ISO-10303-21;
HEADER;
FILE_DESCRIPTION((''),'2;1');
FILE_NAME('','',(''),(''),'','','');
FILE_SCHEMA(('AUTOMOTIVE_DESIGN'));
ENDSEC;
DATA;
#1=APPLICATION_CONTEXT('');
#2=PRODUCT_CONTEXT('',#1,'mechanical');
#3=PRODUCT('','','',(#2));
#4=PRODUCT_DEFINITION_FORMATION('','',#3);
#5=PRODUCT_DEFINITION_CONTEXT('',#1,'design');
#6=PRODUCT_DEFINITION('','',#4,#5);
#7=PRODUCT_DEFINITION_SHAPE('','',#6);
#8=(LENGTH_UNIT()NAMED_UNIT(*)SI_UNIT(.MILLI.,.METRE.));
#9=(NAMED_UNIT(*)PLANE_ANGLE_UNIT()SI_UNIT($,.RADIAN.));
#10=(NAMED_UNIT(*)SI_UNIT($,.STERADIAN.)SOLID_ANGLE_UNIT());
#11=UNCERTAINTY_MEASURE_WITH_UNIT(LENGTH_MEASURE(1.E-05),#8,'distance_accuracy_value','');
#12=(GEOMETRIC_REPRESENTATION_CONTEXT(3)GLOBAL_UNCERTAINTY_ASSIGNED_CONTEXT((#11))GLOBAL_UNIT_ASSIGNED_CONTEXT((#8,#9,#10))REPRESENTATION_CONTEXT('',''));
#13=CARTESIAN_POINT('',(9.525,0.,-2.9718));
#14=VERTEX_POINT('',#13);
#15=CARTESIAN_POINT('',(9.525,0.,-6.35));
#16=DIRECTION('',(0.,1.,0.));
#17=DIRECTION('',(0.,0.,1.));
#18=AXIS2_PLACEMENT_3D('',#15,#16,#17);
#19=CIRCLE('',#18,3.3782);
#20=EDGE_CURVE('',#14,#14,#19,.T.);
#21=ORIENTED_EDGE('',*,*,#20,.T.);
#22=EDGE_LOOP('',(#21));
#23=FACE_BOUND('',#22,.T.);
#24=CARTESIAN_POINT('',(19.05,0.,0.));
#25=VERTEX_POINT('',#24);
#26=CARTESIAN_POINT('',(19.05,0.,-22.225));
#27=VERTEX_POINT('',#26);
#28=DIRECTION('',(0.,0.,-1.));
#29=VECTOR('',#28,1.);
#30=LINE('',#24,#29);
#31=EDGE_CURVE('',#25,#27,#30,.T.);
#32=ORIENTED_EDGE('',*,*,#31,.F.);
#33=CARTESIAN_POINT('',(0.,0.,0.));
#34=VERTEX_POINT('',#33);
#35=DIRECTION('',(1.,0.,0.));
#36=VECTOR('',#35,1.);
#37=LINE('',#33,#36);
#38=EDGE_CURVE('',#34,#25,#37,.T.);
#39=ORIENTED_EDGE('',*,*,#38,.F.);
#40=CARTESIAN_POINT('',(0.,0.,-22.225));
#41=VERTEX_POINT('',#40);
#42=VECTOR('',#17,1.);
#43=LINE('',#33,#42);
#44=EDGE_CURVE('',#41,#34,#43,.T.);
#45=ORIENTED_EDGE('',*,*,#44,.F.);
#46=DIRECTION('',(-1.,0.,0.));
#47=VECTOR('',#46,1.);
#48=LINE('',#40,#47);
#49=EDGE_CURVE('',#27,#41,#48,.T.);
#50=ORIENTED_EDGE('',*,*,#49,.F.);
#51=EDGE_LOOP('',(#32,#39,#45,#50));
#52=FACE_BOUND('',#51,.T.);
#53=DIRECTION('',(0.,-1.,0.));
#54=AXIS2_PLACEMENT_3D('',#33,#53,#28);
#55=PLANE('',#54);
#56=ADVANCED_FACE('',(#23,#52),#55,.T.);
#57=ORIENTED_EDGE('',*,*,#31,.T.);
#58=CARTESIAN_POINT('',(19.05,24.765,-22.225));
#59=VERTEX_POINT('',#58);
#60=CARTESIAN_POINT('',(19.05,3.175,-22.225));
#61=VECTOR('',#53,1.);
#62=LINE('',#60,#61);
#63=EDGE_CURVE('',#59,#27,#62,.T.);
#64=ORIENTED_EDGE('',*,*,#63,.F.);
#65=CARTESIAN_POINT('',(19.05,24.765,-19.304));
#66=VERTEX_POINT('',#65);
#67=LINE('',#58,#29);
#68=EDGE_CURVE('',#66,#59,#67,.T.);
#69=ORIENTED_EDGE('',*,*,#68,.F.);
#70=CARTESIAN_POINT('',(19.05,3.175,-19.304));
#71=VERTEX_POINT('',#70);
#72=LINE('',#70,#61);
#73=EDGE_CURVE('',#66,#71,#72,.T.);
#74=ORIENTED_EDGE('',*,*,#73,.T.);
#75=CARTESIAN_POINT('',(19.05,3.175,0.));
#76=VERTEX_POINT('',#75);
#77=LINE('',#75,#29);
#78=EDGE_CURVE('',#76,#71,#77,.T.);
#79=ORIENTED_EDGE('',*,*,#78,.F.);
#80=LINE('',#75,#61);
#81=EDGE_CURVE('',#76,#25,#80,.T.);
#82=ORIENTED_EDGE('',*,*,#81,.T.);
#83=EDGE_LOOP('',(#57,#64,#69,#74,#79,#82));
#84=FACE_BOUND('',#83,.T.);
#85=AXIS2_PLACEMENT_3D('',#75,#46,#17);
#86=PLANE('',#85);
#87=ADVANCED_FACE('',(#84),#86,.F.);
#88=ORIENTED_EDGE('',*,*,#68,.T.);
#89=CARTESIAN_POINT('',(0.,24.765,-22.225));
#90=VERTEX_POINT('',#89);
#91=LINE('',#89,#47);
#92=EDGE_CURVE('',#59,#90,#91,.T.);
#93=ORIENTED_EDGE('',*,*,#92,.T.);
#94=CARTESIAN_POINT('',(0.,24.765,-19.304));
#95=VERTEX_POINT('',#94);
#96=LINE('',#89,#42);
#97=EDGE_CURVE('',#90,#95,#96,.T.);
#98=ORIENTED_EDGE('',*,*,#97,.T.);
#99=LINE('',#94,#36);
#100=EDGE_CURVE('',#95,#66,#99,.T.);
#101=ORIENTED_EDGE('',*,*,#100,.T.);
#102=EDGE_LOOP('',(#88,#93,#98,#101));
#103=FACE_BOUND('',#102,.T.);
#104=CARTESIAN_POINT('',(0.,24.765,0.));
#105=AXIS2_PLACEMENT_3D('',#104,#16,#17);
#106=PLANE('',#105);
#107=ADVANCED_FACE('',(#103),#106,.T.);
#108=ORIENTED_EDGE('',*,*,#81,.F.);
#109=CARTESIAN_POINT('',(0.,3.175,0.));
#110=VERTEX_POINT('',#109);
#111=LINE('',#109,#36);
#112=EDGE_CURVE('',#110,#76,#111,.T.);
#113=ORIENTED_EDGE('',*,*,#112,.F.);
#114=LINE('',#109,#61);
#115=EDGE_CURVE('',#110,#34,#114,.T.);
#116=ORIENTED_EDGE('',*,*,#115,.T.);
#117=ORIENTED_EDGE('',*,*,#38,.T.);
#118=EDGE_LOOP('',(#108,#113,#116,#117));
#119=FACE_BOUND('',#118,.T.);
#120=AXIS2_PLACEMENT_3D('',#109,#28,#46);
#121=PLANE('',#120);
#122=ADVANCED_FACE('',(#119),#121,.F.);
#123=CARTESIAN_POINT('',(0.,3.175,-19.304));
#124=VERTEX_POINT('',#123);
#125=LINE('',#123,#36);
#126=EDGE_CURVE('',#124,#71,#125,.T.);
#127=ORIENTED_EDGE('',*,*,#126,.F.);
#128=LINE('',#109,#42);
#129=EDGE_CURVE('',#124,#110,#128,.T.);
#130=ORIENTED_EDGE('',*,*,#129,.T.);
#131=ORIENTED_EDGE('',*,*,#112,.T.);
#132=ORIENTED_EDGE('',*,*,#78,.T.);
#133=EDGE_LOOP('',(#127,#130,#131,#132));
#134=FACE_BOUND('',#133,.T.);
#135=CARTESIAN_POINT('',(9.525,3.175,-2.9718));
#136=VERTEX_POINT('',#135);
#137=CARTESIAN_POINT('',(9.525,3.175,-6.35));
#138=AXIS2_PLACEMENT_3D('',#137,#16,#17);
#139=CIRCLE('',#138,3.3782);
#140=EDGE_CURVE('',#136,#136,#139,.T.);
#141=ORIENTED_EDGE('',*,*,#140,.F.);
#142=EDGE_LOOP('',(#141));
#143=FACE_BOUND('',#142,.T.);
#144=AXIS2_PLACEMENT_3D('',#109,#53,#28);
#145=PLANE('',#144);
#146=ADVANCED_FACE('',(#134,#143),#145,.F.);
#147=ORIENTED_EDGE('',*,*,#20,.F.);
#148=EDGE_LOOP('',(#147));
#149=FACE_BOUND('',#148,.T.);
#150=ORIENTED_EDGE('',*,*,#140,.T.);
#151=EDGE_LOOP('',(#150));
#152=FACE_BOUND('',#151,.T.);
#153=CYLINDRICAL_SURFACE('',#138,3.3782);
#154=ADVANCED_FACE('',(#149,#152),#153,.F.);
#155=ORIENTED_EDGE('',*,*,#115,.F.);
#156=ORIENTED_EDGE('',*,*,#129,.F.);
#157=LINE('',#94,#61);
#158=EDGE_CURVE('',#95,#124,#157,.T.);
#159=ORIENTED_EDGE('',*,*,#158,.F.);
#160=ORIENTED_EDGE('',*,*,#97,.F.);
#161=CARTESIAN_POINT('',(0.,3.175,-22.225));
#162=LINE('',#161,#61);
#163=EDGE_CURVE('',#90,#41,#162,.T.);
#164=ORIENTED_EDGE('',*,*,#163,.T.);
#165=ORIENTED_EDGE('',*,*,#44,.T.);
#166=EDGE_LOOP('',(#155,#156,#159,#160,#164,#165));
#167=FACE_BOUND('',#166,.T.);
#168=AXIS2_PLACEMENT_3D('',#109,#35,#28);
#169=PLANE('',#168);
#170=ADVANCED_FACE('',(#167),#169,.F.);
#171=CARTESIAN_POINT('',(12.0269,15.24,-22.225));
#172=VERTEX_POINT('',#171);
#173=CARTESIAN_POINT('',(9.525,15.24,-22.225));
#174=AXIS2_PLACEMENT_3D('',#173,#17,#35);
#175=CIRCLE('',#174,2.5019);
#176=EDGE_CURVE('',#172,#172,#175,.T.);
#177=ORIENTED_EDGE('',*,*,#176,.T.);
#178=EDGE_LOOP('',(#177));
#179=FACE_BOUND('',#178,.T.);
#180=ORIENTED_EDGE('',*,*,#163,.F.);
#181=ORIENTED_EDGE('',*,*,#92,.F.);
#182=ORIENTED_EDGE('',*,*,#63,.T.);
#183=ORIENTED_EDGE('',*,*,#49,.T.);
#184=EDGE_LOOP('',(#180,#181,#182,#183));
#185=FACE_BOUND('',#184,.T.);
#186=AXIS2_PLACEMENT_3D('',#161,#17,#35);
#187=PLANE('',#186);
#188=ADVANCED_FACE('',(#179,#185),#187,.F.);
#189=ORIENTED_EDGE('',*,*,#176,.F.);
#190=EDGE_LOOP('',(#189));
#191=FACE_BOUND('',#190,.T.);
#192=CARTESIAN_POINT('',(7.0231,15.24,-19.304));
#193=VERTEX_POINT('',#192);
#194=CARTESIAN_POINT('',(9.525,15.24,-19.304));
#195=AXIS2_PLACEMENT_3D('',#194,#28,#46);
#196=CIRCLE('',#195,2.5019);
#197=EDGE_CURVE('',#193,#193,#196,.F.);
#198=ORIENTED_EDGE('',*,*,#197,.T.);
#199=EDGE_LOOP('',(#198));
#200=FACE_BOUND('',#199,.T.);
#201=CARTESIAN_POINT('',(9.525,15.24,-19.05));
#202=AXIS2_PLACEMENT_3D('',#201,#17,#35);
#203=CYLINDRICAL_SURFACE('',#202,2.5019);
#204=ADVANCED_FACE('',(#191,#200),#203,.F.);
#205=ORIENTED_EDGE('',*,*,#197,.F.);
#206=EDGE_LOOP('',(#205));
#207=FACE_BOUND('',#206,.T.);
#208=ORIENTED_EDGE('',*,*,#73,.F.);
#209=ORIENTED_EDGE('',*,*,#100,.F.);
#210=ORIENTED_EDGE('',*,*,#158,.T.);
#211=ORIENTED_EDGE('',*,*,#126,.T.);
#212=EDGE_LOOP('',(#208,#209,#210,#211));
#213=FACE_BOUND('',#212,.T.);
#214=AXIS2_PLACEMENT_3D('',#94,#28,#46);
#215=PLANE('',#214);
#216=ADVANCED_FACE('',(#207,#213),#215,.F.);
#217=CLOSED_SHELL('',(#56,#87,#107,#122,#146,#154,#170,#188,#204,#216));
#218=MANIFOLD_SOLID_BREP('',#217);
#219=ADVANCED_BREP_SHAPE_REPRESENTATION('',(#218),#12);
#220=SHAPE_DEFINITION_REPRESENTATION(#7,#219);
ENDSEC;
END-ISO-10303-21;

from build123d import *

# Parameters (mm, degrees)
SKETCH1_W                = 19.05
SKETCH1_H                = 22.225
BOSS_EXTRUDE1_DEPTH      = 3.175
SKETCH2_W                = 19.05
SKETCH2_H                = 3.175
BOSS_EXTRUDE2_DEPTH      = 21.59
F_1_4_CLEARANCE_HOLE2_D  = 6.7564
F_8_CLEARANCE_HOLE1_D    = 4.4958
MOVE_START               = -19.304
MOVE_FACE1_OUTLINE_W     = 19.05
MOVE_FACE1_OUTLINE_H     = 21.59
MOVE_FACE1_OUTLINE_R     = 2.2479
MOVE_FACE1_DEPTH         = 0.254
MOVE_START_2             = -22.225
MOVE_FACE1_2_OUTLINE_R   = 2.5019
MOVE_FACE1_2_OUTLINE_R_2 = 2.2479
MOVE_FACE1_2_DEPTH       = 2.921


# Read off the part's stored shape, not the designer's step: Move Face1
with BuildPart() as part:
    # Sketch1 → Boss-Extrude1 (new body)
    with BuildSketch(Plane(origin=(0, 0, 0), x_dir=(1, 0, 0), z_dir=(0, 1, 0))):
        with Locations((9.525, 11.1125)):
            Rectangle(SKETCH1_W, SKETCH1_H)
    extrude(amount=BOSS_EXTRUDE1_DEPTH)

    # Sketch2 → Boss-Extrude2 (add)
    with BuildSketch(Plane(origin=(0, 3.175, 0), x_dir=(1, 0, 0), z_dir=(0, 1, 0))):
        with Locations((9.525, 20.6375)):
            Rectangle(SKETCH2_W, SKETCH2_H)
    extrude(amount=BOSS_EXTRUDE2_DEPTH)

    # 1/4 Clearance Hole2 (through all)
    with Locations(Plane(origin=(9.525, 3.175, -6.35), x_dir=(0, 0, 1), z_dir=(0, 1, 0))):
        with Locations((0, 0)):
            Hole(F_1_4_CLEARANCE_HOLE2_D / 2)

    # #8 Clearance Hole1 (through all)
    with Locations(Plane(origin=(9.525, 15.24, -19.05), x_dir=(1, 0, 0), z_dir=(0, 0, 1))):
        with Locations((0, 0)):
            Hole(F_8_CLEARANCE_HOLE1_D / 2)

    # Move Face1 outline → Move Face1 (cut)
    with BuildSketch(Plane.XY.offset(MOVE_START)):
        with Locations((9.525, 13.97)):
            Rectangle(MOVE_FACE1_OUTLINE_W, MOVE_FACE1_OUTLINE_H)
        with Locations((9.525, 15.24)):
            Circle(MOVE_FACE1_OUTLINE_R, mode=Mode.SUBTRACT)
    extrude(amount=MOVE_FACE1_DEPTH, mode=Mode.SUBTRACT)

    # Move Face1 2 outline → Move Face1 2 (cut)
    with BuildSketch(Plane.XY.offset(MOVE_START_2)):
        with Locations((9.525, 15.24)):
            Circle(MOVE_FACE1_2_OUTLINE_R)
        with Locations((9.525, 15.24)):
            Circle(MOVE_FACE1_2_OUTLINE_R_2, mode=Mode.SUBTRACT)
    extrude(amount=MOVE_FACE1_2_DEPTH, mode=Mode.SUBTRACT)


solid = part.part
